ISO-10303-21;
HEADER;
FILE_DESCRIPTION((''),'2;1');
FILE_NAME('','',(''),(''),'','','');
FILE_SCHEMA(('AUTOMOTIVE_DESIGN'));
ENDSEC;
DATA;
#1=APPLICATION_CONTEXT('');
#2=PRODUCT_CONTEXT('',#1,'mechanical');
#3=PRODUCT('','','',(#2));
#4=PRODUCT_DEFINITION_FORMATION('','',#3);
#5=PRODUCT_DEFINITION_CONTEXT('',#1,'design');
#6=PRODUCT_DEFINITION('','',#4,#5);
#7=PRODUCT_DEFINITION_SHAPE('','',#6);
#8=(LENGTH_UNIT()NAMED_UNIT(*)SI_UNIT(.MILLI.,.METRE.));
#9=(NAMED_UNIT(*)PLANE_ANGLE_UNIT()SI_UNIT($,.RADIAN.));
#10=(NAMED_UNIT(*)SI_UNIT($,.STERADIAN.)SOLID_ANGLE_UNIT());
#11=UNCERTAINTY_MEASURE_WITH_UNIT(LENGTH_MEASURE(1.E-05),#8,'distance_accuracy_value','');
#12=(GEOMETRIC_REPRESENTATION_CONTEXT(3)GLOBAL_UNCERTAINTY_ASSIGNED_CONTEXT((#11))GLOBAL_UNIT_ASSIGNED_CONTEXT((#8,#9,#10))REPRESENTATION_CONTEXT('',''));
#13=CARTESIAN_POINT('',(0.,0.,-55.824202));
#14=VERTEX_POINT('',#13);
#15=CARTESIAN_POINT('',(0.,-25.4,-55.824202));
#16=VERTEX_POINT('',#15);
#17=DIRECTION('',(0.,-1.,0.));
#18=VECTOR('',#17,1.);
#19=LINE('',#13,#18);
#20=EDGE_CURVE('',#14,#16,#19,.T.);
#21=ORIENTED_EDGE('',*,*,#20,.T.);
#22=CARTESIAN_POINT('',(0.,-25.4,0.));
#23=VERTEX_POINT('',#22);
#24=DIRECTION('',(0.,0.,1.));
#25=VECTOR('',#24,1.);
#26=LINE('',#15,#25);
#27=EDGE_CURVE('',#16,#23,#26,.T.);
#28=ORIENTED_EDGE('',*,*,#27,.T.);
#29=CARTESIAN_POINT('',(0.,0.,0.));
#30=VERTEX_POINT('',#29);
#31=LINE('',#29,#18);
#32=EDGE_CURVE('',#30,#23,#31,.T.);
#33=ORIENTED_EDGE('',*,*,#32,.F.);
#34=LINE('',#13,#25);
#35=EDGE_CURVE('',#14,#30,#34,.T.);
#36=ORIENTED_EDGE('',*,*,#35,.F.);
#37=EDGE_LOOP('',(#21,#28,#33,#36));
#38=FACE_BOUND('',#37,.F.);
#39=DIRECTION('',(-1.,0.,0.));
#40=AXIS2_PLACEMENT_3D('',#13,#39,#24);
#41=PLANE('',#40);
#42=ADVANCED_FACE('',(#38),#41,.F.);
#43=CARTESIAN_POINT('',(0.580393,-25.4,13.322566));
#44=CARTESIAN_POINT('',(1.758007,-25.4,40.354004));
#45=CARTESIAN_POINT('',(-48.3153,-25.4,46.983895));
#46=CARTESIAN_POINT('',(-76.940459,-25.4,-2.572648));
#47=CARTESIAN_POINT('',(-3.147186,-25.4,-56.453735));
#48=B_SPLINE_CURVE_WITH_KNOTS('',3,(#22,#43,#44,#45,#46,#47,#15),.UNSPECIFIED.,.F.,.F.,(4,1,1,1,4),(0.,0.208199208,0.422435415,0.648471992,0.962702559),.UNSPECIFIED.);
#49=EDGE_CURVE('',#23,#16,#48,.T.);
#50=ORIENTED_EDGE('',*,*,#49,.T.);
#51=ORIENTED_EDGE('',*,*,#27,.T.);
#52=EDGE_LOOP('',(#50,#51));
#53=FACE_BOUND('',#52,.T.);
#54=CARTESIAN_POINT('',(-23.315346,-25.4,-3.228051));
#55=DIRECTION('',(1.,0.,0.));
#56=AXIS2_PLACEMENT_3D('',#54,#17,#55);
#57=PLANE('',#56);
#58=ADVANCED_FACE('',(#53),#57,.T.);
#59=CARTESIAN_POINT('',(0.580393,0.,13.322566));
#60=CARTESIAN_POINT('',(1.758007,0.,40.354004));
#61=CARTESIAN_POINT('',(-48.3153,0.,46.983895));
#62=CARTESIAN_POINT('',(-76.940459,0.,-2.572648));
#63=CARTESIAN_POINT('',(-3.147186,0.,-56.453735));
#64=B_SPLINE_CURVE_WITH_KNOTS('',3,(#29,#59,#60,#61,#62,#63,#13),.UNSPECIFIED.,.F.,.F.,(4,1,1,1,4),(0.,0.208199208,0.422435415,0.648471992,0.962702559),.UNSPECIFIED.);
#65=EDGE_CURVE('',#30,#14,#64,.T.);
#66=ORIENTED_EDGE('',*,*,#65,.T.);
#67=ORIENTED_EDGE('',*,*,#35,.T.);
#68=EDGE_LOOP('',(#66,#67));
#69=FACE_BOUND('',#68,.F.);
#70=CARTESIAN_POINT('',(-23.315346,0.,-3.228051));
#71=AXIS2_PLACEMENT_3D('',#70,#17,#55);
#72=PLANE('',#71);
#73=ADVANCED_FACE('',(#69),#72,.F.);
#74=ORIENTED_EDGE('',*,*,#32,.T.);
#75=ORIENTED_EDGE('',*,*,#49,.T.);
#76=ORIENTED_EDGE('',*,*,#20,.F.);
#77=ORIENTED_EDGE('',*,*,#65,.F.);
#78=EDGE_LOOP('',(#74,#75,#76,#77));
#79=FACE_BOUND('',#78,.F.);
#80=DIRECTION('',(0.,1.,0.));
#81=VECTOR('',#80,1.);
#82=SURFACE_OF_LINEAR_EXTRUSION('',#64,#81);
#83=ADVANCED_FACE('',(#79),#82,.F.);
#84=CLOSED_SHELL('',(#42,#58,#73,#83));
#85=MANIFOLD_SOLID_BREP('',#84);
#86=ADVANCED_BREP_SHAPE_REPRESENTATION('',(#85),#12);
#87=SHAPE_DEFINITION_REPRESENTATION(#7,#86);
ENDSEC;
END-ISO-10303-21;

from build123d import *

# Parameters (mm, degrees)
F3_DEPTH = 25.4


# Not quite as in the source:
# - the dataset's text gives a spline's control points without its knots; the knots are read off the source's solid


with BuildPart() as f3:
    # F2 (on Front) → F3 (new body)
    with BuildSketch(Plane.XZ):
        with BuildLine():
            Line((0, -54.6992830932), (0, 0))
            add(Edge.make_bspline(
                [(0, 0), (0.5803927113, 13.3225663102), (1.7580073561, 40.3540036219), (-48.3152996398, 46.9838946285), (-76.9404589005, -2.5726478686), (-3.1471856567, -56.4537351882), (0, -55.8242015541)],
                knots=[0, 0, 0, 0, 0.2081992077, 0.4224354152, 0.6484719923, 0.9627025589, 0.9627025589, 0.9627025589, 0.9627025589], degree=3))
            Line((0, -55.8242015541), (0, -54.6992830932))
        make_face()
    extrude(amount=F3_DEPTH)


solid = f3.part
